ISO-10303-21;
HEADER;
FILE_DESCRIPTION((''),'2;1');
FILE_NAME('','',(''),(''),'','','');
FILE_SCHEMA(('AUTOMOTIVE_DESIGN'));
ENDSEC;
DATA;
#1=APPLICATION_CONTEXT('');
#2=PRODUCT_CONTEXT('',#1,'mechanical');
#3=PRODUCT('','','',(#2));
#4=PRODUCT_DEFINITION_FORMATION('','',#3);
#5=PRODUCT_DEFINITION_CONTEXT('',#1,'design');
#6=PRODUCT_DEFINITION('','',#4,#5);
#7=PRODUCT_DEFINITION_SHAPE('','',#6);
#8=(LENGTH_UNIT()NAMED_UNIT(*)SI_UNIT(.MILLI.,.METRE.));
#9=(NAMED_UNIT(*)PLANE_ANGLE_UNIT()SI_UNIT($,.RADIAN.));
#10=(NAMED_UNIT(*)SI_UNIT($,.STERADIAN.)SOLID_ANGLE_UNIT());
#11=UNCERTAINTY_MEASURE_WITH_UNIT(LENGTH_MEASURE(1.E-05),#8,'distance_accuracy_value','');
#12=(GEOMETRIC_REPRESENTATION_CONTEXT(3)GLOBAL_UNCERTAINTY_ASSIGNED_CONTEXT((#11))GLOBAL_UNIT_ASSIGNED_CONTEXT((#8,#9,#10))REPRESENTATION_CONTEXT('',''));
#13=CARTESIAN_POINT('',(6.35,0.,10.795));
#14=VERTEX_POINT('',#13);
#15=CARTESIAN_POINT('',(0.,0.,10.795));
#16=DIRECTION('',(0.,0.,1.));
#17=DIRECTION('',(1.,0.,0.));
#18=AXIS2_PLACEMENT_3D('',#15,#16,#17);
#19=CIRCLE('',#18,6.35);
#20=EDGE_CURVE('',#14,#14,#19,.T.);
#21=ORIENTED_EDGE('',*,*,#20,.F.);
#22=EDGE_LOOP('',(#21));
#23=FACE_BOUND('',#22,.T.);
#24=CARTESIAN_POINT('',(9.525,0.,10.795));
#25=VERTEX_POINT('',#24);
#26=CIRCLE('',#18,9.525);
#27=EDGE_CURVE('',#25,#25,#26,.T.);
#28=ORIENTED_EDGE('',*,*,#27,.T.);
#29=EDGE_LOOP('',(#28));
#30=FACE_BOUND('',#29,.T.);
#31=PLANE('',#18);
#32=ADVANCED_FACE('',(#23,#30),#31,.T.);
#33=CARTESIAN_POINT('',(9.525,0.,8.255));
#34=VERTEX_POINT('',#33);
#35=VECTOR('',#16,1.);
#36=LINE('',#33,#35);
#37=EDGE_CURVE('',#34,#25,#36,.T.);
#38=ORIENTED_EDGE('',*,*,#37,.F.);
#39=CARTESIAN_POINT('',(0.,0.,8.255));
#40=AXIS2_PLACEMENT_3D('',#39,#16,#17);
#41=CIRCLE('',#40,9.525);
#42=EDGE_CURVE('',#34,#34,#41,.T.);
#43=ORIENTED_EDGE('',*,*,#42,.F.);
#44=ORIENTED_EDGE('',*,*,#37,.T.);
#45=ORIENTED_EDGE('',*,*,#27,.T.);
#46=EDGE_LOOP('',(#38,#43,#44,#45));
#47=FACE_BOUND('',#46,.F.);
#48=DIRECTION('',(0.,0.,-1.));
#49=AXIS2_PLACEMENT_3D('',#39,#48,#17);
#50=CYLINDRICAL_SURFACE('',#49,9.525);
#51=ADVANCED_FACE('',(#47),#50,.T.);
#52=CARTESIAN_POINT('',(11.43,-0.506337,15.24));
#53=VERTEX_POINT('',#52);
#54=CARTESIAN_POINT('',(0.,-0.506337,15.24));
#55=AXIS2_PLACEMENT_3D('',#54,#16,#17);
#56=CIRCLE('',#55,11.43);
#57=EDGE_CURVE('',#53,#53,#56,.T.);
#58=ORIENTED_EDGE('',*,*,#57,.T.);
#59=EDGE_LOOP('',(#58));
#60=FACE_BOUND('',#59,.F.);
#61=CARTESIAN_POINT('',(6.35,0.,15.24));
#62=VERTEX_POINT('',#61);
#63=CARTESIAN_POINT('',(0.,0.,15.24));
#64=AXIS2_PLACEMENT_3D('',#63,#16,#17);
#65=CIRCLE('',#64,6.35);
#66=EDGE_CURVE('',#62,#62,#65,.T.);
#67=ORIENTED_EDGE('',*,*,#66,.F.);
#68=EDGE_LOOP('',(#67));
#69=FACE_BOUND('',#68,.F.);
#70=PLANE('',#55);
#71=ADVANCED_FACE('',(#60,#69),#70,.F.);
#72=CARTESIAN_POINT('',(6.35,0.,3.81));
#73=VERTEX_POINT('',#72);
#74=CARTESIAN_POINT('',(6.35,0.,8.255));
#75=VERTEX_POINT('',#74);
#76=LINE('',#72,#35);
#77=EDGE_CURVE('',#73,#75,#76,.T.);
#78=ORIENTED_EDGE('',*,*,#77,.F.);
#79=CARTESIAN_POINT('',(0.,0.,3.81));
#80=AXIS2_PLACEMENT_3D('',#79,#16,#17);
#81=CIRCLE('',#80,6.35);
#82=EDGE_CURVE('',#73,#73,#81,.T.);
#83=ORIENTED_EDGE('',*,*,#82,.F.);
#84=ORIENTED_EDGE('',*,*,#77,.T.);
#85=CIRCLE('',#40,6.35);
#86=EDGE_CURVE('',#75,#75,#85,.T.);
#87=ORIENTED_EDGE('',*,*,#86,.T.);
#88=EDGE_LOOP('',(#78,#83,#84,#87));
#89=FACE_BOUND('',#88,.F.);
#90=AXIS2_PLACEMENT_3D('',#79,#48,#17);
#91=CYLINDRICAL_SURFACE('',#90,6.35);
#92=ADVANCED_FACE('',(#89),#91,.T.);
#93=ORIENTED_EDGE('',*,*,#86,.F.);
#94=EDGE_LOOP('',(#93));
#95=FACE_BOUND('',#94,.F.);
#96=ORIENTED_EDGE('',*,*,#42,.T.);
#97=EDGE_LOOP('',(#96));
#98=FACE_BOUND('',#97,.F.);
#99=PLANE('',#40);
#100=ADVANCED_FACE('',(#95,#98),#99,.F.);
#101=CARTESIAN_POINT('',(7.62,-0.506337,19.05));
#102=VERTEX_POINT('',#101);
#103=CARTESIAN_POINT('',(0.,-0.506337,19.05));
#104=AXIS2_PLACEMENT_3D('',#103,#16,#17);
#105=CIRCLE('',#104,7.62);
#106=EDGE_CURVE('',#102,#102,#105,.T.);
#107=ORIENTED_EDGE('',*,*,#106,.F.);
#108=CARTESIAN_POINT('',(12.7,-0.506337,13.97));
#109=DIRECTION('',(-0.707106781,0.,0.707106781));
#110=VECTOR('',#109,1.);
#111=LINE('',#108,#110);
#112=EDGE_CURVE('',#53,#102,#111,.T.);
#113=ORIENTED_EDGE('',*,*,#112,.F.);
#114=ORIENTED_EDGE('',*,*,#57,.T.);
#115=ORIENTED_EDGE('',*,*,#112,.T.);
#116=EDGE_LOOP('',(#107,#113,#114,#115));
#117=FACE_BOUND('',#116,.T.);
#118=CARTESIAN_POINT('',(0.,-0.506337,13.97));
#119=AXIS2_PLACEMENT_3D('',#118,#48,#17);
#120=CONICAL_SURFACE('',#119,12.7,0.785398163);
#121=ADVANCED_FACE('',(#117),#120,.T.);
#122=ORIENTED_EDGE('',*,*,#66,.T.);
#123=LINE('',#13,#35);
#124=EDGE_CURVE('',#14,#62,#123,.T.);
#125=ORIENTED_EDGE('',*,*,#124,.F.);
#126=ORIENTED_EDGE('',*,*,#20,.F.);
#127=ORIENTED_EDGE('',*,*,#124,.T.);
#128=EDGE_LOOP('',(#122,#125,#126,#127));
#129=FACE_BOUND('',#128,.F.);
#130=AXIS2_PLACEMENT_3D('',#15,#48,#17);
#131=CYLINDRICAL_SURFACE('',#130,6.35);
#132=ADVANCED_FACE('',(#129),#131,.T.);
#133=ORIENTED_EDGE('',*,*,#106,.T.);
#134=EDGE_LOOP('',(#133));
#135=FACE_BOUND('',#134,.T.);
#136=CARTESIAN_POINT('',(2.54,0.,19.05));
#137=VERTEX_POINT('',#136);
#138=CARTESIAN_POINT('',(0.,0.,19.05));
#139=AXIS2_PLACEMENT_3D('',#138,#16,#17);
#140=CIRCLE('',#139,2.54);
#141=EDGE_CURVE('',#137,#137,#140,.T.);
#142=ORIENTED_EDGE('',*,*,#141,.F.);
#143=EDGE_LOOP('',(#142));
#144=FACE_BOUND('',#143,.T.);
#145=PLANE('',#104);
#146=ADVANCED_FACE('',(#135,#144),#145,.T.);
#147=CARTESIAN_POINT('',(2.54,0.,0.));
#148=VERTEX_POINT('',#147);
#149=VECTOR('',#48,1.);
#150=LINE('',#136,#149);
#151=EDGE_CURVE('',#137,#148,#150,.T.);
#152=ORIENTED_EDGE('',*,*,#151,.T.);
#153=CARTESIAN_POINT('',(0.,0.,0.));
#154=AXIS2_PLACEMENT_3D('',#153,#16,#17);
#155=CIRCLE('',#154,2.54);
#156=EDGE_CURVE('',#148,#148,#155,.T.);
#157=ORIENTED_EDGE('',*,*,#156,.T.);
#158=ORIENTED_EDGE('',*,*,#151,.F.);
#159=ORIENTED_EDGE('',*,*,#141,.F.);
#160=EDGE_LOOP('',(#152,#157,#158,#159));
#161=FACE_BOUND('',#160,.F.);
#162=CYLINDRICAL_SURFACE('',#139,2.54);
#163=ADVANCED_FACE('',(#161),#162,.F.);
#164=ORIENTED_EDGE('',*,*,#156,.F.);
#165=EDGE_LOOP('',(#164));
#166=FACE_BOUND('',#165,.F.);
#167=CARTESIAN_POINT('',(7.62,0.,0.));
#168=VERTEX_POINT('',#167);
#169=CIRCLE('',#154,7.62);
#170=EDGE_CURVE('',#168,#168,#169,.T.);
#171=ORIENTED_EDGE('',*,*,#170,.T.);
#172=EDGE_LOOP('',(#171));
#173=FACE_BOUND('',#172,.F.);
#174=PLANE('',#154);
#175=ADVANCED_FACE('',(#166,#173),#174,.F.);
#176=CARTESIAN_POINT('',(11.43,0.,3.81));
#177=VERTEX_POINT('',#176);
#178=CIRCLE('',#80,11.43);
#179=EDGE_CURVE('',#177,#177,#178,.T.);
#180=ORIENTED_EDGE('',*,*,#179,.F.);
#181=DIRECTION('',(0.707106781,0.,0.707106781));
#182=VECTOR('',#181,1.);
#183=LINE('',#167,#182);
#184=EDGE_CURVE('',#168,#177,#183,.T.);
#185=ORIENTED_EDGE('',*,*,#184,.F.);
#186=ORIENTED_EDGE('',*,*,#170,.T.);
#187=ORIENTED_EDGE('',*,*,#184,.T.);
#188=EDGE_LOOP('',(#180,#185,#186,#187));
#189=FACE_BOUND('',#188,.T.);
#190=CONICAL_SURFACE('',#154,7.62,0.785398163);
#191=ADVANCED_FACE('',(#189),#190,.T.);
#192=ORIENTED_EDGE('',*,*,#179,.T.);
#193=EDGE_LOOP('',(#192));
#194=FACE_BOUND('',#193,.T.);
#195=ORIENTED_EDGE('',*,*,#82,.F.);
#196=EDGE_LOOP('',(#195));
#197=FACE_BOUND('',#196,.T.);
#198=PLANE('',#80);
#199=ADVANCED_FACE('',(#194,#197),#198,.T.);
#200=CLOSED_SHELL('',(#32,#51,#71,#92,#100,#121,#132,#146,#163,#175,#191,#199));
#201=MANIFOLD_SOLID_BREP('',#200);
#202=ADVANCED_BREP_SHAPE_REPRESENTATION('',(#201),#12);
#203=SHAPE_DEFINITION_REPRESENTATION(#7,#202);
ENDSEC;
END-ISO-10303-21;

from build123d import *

# Parameters (mm, degrees)
F0_R      = 12.7
F1_DEPTH  = 3.81
F2_R      = 6.35
F3_DEPTH  = 4.445
F4_R      = 9.525
F5_DEPTH  = 2.54
F6_R      = 6.35
F7_DEPTH  = 4.445
F8_R      = 12.7
F9_DEPTH  = 3.81
F10_R     = 2.54
F11_DEPTH = 19.05


# Not quite as in the source:
# - a fillet or chamfer that OpenCascade refuses, or shapes differently, is made with other operations: its cross-section is extruded or revolved along the edge and cut away or added


with BuildPart() as f1:
    # F0 (on Top) → F1 (new body)
    with BuildSketch(Plane.XY):
        Circle(F0_R)
    extrude(amount=F1_DEPTH)

    # F2 (on face) → F3 (join)
    with BuildSketch(Plane.XY.offset(3.81)):
        Circle(F2_R)
    extrude(amount=F3_DEPTH)

    # F4 (on face) → F5 (join)
    with BuildSketch(Plane.XY.offset(8.255)):
        Circle(F4_R)
    extrude(amount=F5_DEPTH)

    # F6 (on face) → F7 (join)
    with BuildSketch(Plane.XY.offset(10.795)):
        Circle(F6_R)
    extrude(amount=F7_DEPTH)

    # F8 (on face) → F9 (join)
    with BuildSketch(Plane.XY.offset(15.24)):
        with Locations((0, -0.5063372408)):
            Circle(F8_R)
    extrude(amount=F9_DEPTH)

    # F10 (on face) → F11 (cut)
    with BuildSketch(Plane.XY.offset(19.05)):
        Circle(F10_R)
    extrude(amount=-F11_DEPTH, mode=Mode.SUBTRACT)

    # F12: chamfer of 5.08 on 1 edges, made by hand

    # F12_s1 → F12_t2 (revolve, cut)
    with BuildSketch(Plane.XZ.offset(0.5063372408)):
        Polygon((12.7, 13.97), (7.62, 19.05), (12.7, 19.05), align=None)
    revolve(axis=Axis((0, -0.5063372408, 19.05), (0, 0, 1)), mode=Mode.SUBTRACT)

    # F13: chamfer of 5.08 on 1 edges, made by hand

    # F13_s1 → F13_t2 (revolve, cut)
    with BuildSketch(Plane.XZ):
        Polygon((7.62, 0), (12.7, 5.08), (12.7, 0), align=None)
    revolve(axis=Axis((0, 0, 0), (0, 0, 1)), mode=Mode.SUBTRACT)


solid = f1.part
